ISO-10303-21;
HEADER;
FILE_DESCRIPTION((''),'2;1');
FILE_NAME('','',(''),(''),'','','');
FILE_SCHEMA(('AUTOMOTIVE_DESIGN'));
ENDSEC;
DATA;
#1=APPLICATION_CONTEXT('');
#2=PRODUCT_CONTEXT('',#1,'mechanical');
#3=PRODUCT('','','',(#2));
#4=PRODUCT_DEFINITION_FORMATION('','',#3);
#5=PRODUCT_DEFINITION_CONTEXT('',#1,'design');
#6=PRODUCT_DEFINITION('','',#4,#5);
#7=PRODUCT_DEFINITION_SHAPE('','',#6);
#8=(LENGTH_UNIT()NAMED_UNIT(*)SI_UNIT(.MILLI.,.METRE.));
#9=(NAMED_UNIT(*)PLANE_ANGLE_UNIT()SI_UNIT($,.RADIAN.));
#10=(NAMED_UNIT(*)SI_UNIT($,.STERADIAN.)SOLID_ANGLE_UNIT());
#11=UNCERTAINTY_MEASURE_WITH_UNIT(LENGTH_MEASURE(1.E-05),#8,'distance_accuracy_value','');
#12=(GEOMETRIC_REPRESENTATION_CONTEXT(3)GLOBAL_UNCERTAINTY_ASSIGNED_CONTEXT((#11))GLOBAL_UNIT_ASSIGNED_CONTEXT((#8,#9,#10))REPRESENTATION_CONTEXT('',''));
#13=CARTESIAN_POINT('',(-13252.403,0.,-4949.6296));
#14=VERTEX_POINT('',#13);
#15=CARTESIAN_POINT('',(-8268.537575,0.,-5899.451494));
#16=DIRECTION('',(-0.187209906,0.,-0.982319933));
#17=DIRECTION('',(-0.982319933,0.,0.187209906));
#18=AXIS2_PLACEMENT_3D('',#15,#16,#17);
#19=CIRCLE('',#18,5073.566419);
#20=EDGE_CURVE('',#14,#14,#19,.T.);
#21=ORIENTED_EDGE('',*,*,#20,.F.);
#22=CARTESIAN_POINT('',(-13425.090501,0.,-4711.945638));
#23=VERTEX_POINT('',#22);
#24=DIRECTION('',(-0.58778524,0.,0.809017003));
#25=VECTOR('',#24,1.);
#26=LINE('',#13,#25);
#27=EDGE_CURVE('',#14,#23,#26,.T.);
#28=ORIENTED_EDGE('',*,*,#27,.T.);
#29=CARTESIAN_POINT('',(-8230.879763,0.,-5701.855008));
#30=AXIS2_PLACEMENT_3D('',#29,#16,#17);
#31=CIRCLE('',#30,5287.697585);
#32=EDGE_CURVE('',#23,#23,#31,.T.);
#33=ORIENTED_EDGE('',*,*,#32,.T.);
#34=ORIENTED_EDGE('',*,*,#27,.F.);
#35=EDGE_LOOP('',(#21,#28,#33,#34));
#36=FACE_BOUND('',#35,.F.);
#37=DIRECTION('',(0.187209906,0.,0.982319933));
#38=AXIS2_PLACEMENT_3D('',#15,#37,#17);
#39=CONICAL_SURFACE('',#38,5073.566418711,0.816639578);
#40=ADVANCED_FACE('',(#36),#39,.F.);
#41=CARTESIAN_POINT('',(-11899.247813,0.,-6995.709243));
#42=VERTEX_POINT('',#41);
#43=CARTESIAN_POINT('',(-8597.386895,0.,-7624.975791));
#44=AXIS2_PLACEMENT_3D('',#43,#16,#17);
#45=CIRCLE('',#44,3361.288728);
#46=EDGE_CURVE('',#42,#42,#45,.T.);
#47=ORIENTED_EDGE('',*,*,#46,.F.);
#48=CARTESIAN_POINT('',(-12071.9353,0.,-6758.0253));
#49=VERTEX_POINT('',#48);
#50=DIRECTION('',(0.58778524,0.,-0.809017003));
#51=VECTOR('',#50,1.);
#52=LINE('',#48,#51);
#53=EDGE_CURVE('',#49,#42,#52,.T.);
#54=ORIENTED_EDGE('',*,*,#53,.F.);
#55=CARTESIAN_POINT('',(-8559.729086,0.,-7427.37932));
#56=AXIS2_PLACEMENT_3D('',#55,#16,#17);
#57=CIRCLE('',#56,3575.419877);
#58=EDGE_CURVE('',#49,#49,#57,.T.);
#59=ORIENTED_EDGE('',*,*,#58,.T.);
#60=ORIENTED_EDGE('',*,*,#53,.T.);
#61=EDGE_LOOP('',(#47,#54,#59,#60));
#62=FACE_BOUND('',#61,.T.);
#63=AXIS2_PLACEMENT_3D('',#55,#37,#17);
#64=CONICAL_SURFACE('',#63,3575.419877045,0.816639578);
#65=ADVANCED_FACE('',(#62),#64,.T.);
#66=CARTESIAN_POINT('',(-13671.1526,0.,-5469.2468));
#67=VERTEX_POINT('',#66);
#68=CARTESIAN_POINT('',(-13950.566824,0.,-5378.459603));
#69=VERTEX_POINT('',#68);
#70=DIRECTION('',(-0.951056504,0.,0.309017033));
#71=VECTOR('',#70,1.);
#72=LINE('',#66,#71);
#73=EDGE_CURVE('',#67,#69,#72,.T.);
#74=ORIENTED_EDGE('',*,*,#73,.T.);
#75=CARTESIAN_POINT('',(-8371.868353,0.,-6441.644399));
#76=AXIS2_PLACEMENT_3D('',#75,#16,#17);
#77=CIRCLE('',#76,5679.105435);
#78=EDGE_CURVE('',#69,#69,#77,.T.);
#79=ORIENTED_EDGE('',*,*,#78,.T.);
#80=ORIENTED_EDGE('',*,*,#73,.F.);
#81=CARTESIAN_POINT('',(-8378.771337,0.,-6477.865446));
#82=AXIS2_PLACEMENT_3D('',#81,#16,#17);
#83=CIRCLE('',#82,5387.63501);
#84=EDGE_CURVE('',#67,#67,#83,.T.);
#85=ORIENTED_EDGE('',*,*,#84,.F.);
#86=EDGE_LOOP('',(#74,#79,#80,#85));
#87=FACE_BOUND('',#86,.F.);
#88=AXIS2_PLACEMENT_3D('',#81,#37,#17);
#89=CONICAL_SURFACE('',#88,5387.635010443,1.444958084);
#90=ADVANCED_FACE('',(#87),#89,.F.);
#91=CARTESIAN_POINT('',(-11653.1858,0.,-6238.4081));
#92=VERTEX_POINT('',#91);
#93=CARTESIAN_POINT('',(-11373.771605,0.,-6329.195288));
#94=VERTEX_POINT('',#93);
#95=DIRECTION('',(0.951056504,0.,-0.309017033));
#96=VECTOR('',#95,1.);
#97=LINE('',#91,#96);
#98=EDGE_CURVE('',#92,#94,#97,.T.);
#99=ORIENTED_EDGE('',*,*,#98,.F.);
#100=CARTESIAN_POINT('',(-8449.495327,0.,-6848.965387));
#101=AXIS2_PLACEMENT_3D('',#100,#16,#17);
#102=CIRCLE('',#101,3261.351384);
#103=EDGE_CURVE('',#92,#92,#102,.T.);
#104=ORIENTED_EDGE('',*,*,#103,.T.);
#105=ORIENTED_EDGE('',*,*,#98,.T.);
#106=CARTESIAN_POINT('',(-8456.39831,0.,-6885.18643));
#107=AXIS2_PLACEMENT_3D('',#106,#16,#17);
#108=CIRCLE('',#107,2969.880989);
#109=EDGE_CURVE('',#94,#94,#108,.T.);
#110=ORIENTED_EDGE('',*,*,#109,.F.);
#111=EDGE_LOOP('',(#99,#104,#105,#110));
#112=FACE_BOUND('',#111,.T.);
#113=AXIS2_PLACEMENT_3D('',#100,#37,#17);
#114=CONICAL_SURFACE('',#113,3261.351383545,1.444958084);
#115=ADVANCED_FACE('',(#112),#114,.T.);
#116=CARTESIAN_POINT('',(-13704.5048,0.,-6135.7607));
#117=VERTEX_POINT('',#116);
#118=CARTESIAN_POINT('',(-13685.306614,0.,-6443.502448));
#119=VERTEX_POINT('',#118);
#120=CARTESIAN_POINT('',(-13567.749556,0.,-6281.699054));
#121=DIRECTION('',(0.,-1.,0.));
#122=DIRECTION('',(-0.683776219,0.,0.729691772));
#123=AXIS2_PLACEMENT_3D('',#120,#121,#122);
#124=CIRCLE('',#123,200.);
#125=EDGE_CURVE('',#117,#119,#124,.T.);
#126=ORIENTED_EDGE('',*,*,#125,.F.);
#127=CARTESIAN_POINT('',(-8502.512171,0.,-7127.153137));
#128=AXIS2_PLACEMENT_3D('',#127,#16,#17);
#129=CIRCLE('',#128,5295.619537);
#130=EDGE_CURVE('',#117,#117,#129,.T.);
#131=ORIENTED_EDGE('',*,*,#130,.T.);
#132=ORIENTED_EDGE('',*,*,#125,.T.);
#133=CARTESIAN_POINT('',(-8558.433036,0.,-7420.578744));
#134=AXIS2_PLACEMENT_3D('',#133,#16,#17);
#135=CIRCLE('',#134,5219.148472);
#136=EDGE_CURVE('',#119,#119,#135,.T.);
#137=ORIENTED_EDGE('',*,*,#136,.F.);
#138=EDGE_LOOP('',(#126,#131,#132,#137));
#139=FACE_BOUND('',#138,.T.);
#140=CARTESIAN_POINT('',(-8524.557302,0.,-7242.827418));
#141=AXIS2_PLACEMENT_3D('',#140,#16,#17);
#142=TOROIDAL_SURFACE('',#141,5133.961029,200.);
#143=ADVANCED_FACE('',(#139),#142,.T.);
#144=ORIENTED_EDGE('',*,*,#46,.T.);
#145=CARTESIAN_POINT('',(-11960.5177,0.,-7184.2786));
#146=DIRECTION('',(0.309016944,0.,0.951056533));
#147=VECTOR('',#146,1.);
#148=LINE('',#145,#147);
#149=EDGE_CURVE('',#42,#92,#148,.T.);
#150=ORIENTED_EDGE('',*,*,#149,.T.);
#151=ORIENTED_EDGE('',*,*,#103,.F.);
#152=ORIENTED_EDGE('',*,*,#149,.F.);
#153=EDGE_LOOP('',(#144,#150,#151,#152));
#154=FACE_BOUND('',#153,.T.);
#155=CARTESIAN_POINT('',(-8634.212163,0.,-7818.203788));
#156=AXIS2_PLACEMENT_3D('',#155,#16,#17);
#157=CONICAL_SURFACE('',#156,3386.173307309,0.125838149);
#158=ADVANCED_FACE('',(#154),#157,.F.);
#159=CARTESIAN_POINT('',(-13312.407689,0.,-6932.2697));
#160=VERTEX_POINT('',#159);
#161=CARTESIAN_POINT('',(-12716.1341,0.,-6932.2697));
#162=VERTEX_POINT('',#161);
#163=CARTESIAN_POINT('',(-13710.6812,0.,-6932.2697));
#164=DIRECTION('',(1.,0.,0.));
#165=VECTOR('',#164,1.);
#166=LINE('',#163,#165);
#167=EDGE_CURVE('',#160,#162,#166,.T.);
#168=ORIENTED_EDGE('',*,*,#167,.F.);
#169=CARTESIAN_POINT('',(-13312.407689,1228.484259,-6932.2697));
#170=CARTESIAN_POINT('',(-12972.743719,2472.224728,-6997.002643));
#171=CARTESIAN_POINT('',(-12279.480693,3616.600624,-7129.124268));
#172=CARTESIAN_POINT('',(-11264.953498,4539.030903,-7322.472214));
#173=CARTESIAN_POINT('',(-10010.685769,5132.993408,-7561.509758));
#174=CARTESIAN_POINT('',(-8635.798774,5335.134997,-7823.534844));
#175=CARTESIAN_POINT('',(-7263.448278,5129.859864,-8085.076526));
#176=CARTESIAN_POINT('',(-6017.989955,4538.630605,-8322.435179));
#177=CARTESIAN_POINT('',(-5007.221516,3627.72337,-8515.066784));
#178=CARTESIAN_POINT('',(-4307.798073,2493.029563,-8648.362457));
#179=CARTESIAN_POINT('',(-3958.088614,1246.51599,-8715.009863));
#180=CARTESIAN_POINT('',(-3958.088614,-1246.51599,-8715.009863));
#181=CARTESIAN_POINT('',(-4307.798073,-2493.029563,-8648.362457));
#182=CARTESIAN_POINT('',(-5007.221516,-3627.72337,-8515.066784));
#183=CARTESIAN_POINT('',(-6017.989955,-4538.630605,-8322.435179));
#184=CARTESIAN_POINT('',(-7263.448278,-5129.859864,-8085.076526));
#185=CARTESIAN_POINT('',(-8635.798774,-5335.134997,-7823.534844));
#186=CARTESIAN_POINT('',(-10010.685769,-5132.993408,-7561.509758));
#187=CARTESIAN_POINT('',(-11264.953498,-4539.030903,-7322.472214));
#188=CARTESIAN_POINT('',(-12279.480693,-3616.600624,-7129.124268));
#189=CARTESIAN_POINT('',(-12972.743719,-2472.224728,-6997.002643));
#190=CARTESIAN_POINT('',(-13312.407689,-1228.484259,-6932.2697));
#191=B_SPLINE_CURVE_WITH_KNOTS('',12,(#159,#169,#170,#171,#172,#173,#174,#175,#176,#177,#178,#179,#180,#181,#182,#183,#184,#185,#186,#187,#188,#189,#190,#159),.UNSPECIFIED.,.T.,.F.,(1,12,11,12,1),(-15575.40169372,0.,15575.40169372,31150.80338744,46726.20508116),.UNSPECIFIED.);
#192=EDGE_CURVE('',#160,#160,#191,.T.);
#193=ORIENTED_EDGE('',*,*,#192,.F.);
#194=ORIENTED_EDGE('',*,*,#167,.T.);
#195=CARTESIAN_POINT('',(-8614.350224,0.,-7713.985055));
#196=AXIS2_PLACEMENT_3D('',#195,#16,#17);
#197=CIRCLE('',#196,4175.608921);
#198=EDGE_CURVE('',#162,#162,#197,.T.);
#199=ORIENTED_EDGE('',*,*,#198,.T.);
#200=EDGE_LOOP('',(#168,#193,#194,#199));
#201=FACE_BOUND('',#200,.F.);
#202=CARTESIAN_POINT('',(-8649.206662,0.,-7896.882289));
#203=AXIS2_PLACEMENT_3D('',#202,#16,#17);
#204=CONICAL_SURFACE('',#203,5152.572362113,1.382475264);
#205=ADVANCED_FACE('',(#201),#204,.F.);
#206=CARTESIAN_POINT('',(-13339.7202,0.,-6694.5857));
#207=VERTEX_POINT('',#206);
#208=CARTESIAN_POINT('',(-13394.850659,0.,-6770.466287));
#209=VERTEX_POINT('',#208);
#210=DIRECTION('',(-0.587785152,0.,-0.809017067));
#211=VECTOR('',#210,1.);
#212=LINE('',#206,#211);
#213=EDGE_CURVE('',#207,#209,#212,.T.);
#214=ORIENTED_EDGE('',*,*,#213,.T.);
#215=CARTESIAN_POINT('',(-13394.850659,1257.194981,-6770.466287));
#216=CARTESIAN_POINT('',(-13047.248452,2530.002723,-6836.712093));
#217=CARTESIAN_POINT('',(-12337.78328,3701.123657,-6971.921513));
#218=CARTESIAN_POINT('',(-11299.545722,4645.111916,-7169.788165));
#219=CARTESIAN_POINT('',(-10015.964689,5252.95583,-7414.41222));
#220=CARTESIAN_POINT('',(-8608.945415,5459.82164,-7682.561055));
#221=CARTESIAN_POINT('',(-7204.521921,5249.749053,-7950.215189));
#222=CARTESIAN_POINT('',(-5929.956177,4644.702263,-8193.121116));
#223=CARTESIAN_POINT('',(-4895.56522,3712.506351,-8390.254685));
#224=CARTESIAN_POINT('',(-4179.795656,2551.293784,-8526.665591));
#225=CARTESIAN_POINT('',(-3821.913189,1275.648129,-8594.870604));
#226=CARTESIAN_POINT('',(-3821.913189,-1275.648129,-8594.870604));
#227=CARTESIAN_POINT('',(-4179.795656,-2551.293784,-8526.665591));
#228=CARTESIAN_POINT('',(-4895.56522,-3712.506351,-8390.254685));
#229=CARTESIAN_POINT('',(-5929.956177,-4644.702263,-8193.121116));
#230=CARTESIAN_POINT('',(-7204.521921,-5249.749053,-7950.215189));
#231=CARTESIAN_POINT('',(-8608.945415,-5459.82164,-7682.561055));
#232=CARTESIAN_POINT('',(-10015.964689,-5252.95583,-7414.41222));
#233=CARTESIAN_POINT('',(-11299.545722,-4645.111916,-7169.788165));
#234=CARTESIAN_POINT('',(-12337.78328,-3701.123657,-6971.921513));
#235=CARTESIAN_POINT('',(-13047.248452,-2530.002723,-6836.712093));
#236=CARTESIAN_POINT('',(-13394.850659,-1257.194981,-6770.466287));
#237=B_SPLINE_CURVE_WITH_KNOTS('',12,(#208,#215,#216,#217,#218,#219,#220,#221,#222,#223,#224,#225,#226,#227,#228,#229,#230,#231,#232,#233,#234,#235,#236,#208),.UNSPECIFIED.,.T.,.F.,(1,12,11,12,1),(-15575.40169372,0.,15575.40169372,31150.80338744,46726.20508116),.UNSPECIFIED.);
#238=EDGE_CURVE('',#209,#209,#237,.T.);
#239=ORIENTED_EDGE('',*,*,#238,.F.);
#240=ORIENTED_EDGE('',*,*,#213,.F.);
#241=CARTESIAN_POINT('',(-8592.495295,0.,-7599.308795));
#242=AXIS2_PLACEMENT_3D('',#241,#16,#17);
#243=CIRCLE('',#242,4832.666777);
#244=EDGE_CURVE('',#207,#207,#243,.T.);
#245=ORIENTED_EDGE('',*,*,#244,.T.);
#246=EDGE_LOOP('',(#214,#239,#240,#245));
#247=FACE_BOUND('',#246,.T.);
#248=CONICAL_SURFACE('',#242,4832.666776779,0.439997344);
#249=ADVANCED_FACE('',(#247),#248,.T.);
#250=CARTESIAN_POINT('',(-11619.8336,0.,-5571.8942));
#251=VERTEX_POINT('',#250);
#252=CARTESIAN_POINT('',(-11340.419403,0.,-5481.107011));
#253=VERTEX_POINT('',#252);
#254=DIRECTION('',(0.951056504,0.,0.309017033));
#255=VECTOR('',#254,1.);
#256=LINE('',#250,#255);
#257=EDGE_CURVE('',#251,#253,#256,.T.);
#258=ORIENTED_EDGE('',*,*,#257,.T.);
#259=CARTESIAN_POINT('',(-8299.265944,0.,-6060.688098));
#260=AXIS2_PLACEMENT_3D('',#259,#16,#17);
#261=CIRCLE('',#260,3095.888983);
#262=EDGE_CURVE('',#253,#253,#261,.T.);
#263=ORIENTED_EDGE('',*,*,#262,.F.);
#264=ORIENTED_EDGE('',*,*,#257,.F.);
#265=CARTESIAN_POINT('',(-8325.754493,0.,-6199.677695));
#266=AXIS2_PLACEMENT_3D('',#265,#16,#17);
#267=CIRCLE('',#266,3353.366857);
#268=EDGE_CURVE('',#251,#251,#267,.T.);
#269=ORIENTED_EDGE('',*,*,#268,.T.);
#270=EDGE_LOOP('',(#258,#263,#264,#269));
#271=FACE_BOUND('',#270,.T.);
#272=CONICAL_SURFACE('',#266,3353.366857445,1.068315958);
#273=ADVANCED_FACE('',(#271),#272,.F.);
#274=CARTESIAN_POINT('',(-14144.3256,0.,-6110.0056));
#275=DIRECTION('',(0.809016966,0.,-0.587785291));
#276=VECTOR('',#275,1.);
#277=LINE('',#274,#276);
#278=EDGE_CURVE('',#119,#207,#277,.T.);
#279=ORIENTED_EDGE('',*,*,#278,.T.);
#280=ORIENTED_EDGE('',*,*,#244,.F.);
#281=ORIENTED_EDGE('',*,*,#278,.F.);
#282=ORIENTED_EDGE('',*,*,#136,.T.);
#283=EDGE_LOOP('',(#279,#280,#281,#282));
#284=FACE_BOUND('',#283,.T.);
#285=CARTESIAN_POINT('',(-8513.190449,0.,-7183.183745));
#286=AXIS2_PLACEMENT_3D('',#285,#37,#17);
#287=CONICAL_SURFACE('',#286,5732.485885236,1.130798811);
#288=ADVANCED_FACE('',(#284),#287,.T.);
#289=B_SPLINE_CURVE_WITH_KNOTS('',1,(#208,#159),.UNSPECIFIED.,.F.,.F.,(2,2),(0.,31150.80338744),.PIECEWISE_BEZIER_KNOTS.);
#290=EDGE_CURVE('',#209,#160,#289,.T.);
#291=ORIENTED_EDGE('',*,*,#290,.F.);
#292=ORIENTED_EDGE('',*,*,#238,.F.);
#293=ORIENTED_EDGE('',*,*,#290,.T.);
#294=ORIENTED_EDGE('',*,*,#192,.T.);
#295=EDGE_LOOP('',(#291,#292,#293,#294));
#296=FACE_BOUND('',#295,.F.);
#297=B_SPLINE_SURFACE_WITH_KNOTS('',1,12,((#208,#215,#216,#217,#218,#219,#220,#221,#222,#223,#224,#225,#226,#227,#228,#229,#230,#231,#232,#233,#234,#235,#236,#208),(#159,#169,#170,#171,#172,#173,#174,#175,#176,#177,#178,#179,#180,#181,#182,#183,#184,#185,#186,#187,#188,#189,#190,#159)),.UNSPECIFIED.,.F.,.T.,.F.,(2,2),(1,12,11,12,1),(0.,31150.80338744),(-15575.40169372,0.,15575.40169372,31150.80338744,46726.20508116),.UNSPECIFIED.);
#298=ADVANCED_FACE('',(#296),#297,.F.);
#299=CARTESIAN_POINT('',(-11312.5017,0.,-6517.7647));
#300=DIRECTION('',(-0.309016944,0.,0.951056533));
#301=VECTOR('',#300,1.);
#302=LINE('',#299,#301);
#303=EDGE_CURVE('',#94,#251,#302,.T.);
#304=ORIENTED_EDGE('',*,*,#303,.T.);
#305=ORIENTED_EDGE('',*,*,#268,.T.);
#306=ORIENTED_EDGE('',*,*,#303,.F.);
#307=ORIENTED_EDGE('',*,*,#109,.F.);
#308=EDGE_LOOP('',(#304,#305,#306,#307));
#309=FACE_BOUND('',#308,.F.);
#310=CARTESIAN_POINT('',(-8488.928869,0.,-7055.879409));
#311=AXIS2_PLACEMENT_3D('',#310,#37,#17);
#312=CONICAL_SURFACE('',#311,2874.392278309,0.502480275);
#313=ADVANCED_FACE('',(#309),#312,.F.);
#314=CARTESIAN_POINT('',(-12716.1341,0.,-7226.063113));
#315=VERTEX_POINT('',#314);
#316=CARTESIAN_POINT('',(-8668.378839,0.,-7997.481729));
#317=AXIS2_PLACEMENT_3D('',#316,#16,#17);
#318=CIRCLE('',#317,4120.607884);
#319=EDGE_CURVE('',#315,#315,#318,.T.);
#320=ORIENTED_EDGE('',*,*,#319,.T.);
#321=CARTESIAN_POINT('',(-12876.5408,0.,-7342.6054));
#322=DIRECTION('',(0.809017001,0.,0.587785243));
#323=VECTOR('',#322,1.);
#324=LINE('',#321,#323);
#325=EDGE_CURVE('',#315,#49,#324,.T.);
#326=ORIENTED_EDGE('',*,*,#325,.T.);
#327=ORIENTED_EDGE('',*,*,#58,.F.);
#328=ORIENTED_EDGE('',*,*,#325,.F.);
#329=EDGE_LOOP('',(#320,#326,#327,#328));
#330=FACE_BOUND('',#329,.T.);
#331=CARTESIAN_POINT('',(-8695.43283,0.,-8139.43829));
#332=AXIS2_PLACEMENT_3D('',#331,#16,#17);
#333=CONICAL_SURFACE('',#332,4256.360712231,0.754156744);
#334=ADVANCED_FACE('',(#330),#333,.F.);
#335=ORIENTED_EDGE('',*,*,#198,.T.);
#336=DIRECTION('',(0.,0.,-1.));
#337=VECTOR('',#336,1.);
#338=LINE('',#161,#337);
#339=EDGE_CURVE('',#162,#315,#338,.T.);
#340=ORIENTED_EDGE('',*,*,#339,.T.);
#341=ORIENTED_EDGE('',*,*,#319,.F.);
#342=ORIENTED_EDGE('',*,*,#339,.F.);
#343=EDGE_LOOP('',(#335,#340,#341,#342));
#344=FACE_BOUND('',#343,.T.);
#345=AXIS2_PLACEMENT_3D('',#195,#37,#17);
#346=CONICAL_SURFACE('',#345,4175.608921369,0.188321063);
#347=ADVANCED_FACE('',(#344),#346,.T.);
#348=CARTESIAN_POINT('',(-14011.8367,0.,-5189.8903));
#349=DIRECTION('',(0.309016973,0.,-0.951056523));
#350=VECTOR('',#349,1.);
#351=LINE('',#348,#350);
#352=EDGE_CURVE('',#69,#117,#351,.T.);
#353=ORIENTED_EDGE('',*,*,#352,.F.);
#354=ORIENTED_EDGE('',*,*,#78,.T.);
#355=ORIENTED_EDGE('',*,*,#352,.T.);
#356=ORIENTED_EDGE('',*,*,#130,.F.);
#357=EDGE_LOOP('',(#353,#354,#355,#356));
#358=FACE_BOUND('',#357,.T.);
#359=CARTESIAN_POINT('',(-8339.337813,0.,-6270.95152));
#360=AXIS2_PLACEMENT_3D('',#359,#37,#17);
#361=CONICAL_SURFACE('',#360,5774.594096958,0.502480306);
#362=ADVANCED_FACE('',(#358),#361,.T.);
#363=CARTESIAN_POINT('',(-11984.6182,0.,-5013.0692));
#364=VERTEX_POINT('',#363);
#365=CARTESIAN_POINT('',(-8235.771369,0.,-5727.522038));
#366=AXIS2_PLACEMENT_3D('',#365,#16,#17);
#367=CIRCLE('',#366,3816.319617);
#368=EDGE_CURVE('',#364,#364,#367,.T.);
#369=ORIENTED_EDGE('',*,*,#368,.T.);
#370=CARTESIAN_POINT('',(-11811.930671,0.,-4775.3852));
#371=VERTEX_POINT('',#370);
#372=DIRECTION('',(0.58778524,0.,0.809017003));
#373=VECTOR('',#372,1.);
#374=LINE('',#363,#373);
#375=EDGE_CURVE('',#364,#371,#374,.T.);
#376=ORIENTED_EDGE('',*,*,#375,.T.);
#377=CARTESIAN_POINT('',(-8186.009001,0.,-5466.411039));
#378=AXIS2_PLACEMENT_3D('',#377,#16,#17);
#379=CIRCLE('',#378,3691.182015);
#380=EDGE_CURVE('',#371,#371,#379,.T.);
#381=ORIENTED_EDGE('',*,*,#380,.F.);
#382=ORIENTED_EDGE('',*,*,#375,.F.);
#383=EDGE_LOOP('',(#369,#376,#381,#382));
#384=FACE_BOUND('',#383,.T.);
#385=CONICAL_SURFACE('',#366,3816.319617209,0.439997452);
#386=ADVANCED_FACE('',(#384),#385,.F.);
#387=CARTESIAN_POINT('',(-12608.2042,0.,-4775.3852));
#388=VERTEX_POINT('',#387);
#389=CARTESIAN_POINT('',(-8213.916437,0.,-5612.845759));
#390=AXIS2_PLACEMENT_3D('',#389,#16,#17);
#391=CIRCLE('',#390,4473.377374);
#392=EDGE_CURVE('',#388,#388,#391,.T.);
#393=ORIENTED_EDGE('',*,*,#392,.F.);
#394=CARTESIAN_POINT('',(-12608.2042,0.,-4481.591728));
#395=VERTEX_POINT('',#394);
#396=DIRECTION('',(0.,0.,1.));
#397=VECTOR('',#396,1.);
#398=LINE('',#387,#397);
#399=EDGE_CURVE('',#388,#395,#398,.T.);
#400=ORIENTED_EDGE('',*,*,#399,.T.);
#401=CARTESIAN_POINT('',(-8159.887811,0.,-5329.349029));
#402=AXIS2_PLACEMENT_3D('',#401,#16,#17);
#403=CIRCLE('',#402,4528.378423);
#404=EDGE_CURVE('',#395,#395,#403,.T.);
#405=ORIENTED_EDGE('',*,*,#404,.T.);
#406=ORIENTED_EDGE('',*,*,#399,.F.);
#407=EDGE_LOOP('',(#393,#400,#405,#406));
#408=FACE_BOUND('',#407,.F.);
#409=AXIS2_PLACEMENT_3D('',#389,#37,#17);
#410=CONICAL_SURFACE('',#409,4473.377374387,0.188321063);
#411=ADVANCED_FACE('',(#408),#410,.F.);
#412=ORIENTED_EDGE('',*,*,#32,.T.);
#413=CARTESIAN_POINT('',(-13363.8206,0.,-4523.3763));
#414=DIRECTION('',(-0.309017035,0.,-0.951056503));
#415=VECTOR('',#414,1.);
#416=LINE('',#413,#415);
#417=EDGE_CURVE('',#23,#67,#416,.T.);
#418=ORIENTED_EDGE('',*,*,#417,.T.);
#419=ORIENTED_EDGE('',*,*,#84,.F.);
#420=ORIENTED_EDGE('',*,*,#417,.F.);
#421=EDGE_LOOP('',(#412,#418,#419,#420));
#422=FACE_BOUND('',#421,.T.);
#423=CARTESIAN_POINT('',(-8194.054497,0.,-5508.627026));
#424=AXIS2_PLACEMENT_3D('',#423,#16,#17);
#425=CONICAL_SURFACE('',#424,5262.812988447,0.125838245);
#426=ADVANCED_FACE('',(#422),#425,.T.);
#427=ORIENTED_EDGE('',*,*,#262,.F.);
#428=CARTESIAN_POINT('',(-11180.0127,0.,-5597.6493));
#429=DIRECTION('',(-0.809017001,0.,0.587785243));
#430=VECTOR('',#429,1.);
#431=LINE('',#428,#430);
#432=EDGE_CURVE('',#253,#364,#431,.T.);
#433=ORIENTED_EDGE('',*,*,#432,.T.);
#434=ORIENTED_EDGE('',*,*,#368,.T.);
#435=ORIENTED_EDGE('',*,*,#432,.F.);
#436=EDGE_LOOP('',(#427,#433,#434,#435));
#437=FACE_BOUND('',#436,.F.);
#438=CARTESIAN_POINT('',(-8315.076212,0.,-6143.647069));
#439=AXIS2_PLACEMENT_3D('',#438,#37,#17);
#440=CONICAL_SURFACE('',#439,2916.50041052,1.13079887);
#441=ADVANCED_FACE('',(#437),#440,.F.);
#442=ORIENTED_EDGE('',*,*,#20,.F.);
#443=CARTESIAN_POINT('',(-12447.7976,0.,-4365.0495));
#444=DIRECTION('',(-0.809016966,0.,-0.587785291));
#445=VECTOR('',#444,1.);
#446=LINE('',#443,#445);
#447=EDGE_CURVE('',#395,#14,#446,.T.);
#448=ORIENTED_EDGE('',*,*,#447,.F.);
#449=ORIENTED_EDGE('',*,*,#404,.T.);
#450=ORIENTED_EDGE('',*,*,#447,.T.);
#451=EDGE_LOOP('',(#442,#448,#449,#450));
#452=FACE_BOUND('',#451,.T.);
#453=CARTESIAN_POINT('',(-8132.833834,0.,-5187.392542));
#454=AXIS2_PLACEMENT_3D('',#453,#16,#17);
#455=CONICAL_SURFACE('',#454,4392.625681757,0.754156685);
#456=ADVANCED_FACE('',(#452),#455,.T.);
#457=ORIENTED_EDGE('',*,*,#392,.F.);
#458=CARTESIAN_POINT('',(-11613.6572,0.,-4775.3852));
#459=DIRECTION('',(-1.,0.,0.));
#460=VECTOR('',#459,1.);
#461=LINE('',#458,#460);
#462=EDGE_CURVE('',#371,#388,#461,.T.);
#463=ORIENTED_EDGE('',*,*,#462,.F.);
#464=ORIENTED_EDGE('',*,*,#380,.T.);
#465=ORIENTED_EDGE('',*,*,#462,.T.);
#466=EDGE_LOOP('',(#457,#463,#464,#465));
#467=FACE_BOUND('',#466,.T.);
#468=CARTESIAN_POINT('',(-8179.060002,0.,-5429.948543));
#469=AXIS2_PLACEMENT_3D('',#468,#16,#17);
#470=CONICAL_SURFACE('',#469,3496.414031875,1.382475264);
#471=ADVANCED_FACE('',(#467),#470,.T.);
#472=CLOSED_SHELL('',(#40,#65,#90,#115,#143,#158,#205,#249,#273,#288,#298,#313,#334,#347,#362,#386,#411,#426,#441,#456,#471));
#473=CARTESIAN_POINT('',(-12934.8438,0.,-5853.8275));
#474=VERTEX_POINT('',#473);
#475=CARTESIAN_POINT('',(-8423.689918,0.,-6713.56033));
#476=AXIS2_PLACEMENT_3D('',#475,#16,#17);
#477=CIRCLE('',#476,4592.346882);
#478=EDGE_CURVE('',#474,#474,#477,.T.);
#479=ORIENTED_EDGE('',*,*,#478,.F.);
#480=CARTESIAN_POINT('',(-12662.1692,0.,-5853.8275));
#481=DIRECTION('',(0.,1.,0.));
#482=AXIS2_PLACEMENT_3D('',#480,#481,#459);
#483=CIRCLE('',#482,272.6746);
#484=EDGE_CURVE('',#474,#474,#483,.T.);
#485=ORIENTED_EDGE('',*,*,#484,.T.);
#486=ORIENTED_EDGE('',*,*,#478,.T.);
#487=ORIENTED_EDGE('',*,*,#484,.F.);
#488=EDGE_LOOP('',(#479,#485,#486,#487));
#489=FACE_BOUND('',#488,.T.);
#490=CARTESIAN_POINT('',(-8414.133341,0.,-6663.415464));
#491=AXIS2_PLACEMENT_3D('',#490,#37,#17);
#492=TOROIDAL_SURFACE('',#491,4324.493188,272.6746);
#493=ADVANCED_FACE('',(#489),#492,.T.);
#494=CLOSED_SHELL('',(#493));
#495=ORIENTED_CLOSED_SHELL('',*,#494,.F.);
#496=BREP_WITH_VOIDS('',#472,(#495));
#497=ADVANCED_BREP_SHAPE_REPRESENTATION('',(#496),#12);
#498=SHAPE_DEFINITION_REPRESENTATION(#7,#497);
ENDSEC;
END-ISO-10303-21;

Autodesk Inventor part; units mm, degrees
ref_plane "YZ Plane" through (0, 0, 0) normal (1, 0, 0) x (0, 1, 0)
ref_plane "XZ Plane" through (0, 0, 0) normal (0, 1, 0) x (-1, 0, 0)
ref_plane "XY Plane" through (0, 0, 0) normal (0, 0, 1) x (1, 0, 0)
sketch "Sketch1" plane through (0, 0, 0) normal (0, 1, 0) x (-1, 0, 0)
  line L0 (0, 1270.9169) -> (0, 1070.9169)
  line L1 (0, 1070.9169) -> (280.5773, 1070.9169)
  circle A0 centre (280.5773, 1070.9169) radius 150
  arc A1 (0, 862.6395) -> (280.5773, 1070.9169) centre (285.6481, 770.9597) ccw
  line L2 (0, 1671.4874) -> (1000, 1671.4874)
  line L3 (1000, 1671.4874) -> (1000, 2371.4874)
  line L4 (1000, 2371.4874) -> (0, 2371.4874)
  line L5 (0, 2371.4874) -> (0, 1671.4874)
  line L6 (663.7557, 3727.8622) -> (677.7261, 3727.8622) construction
  line L7 (677.7261, 3727.8622) -> (677.7261, 3724.6141) construction
  line L8 (677.7261, 3724.6141) -> (663.7557, 3724.6141) construction
  line L9 (663.7557, 3724.6141) -> (663.7557, 3727.8622) construction
  line L10 (500, 2021.4874) -> (1196.7714, 1270.9169)
  line L11 (1196.7714, 1270.9169) -> (1168.0077, -285.8687)
  line L12 (1168.0077, -285.8687) -> (464.4615, -168.1988)
  line L13 (464.4615, -168.1988) -> (320.7847, -408.7683)
  line L14 (1361.4266, 1423.77) -> (-428.0148, 1423.77)
  line L15 (-500, 1671.4874) -> (-500, 2371.4874)
  line L16 (-500, 2371.4874) -> (-1500, 2371.4874)
  line L17 (-1500, 2371.4874) -> (-1500, 1671.4874)
  line L18 (-1500, 1671.4874) -> (-500, 1671.4874)
  line L19 (2500, 1671.4874) -> (2500, 2371.4874)
  line L20 (2500, 2371.4874) -> (1500, 2371.4874)
  line L21 (1500, 2371.4874) -> (1500, 1671.4874)
  line L22 (1500, 1671.4874) -> (2500, 1671.4874)
  line L23 (1000, 1671.4874) -> (1000, 2371.4874)
  line L24 (1000, 2371.4874) -> (0, 2371.4874)
  line L25 (0, 2371.4874) -> (0, 1671.4874)
  line L26 (0, 1671.4874) -> (1000, 1671.4874)
  line L27 (500, 2021.4874) -> (500, -515.8022)
  line L28 (1000, 871.4874) -> (0, 871.4874)
  line L29 (1000, 871.4874) -> (0, 871.4874)
  line L30 (1000, 171.4874) -> (1000, 871.4874)
  line L31 (1000, 171.4874) -> (1000, 871.4874)
  line L32 (0, 871.4874) -> (0, 171.4874)
  line L33 (0, 871.4874) -> (0, 171.4874)
  line L34 (0, 171.4874) -> (1000, 171.4874)
  line L35 (0, 171.4874) -> (1000, 171.4874)
  line L36 (1000, -628.5126) -> (0, -628.5126)
  line L37 (1000, -628.5126) -> (0, -628.5126)
  line L38 (1000, -1328.5126) -> (1000, -628.5126)
  line L39 (1000, -1328.5126) -> (1000, -628.5126)
  line L40 (0, -628.5126) -> (0, -1328.5126)
  line L41 (0, -628.5126) -> (0, -1328.5126)
  line L42 (0, -1328.5126) -> (1000, -1328.5126)
  line L43 (0, -1328.5126) -> (1000, -1328.5126)
  line L44 (1000, -2128.5126) -> (0, -2128.5126)
  line L45 (1000, -2128.5126) -> (0, -2128.5126)
  line L46 (1000, -2828.5126) -> (1000, -2128.5126)
  line L47 (1000, -2828.5126) -> (1000, -2128.5126)
  line L48 (0, -2128.5126) -> (0, -2828.5126)
  line L49 (0, -2128.5126) -> (0, -2828.5126)
  line L50 (0, -2828.5126) -> (1000, -2828.5126)
  line L51 (0, -2828.5126) -> (1000, -2828.5126)
  line L52 (1000, -3628.5126) -> (0, -3628.5126)
  line L53 (1000, -3628.5126) -> (0, -3628.5126)
  line L54 (1000, -4328.5126) -> (1000, -3628.5126)
  line L55 (1000, -4328.5126) -> (1000, -3628.5126)
  line L56 (0, -3628.5126) -> (0, -4328.5126)
  line L57 (0, -3628.5126) -> (0, -4328.5126)
  line L58 (0, -4328.5126) -> (1000, -4328.5126)
  line L59 (0, -4328.5126) -> (1000, -4328.5126)
  line L60 (1000, -5128.5126) -> (0, -5128.5126)
  line L61 (1000, -5128.5126) -> (0, -5128.5126)
  line L62 (1000, -5828.5126) -> (1000, -5128.5126)
  line L63 (1000, -5828.5126) -> (1000, -5128.5126)
  line L64 (0, -5128.5126) -> (0, -5828.5126)
  line L65 (0, -5128.5126) -> (0, -5828.5126)
  line L66 (0, -5828.5126) -> (1000, -5828.5126)
  line L67 (0, -5828.5126) -> (1000, -5828.5126)
  line L68 (1000, -6628.5126) -> (0, -6628.5126)
  line L69 (1000, -6628.5126) -> (0, -6628.5126)
  line L70 (1000, -7328.5126) -> (1000, -6628.5126)
  line L71 (1000, -7328.5126) -> (1000, -6628.5126)
  line L72 (0, -6628.5126) -> (0, -7328.5126)
  line L73 (0, -6628.5126) -> (0, -7328.5126)
  line L74 (0, -7328.5126) -> (1000, -7328.5126)
  line L75 (0, -7328.5126) -> (1000, -7328.5126)
  line L76 (1000, -8128.5126) -> (0, -8128.5126)
  line L77 (1000, -8128.5126) -> (0, -8128.5126)
  line L78 (1000, -8828.5126) -> (1000, -8128.5126)
  line L79 (1000, -8828.5126) -> (1000, -8128.5126)
  line L80 (0, -8128.5126) -> (0, -8828.5126)
  line L81 (0, -8128.5126) -> (0, -8828.5126)
  line L82 (0, -8828.5126) -> (1000, -8828.5126)
  line L83 (0, -8828.5126) -> (1000, -8828.5126)
  line L84 (1000, -9628.5126) -> (0, -9628.5126)
  line L85 (1000, -9628.5126) -> (0, -9628.5126)
  line L86 (1000, -10328.5126) -> (1000, -9628.5126)
  line L87 (1000, -10328.5126) -> (1000, -9628.5126)
  line L88 (0, -9628.5126) -> (0, -10328.5126)
  line L89 (0, -9628.5126) -> (0, -10328.5126)
  line L90 (0, -10328.5126) -> (1000, -10328.5126)
  line L91 (0, -10328.5126) -> (1000, -10328.5126)
  line L92 (1000, -11128.5126) -> (0, -11128.5126)
  line L93 (1000, -11128.5126) -> (0, -11128.5126)
  line L94 (1000, -11828.5126) -> (1000, -11128.5126)
  line L95 (1000, -11828.5126) -> (1000, -11128.5126)
  line L96 (0, -11128.5126) -> (0, -11828.5126)
  line L97 (0, -11128.5126) -> (0, -11828.5126)
  line L98 (0, -11828.5126) -> (1000, -11828.5126)
  line L99 (0, -11828.5126) -> (1000, -11828.5126)
  line L100 (1000, -12628.5126) -> (0, -12628.5126)
  line L101 (1000, -12628.5126) -> (0, -12628.5126)
  line L102 (1000, -13328.5126) -> (1000, -12628.5126)
  line L103 (1000, -13328.5126) -> (1000, -12628.5126)
  line L104 (0, -12628.5126) -> (0, -13328.5126)
  line L105 (0, -12628.5126) -> (0, -13328.5126)
  line L106 (0, -13328.5126) -> (1000, -13328.5126)
  line L107 (0, -13328.5126) -> (1000, -13328.5126)
  line L108 (1000, -14128.5126) -> (0, -14128.5126)
  line L109 (1000, -14128.5126) -> (0, -14128.5126)
  line L110 (1000, -14828.5126) -> (1000, -14128.5126)
  line L111 (1000, -14828.5126) -> (1000, -14128.5126)
  line L112 (0, -14128.5126) -> (0, -14828.5126)
  line L113 (0, -14128.5126) -> (0, -14828.5126)
  line L114 (0, -14828.5126) -> (1000, -14828.5126)
  line L115 (0, -14828.5126) -> (1000, -14828.5126)
  line L116 (1000, -15628.5126) -> (0, -15628.5126)
  line L117 (1000, -15628.5126) -> (0, -15628.5126)
  line L118 (1000, -16328.5126) -> (1000, -15628.5126)
  line L119 (1000, -16328.5126) -> (1000, -15628.5126)
  line L120 (0, -15628.5126) -> (0, -16328.5126)
  line L121 (0, -15628.5126) -> (0, -16328.5126)
  line L122 (0, -16328.5126) -> (1000, -16328.5126)
  line L123 (0, -16328.5126) -> (1000, -16328.5126)
  line L124 (1000, -17128.5126) -> (0, -17128.5126)
  line L125 (1000, -17128.5126) -> (0, -17128.5126)
  line L126 (1000, -17828.5126) -> (1000, -17128.5126)
  line L127 (1000, -17828.5126) -> (1000, -17128.5126)
  line L128 (0, -17128.5126) -> (0, -17828.5126)
  line L129 (0, -17128.5126) -> (0, -17828.5126)
  line L130 (0, -17828.5126) -> (1000, -17828.5126)
  line L131 (0, -17828.5126) -> (1000, -17828.5126)
  line L132 (1000, -18628.5126) -> (0, -18628.5126)
  line L133 (1000, -18628.5126) -> (0, -18628.5126)
  line L134 (1000, -19328.5126) -> (1000, -18628.5126)
  line L135 (1000, -19328.5126) -> (1000, -18628.5126)
  line L136 (0, -18628.5126) -> (0, -19328.5126)
  line L137 (0, -18628.5126) -> (0, -19328.5126)
  line L138 (0, -19328.5126) -> (1000, -19328.5126)
  line L139 (0, -19328.5126) -> (1000, -19328.5126)
  line L140 (1000, -20128.5126) -> (0, -20128.5126)
  line L141 (1000, -20128.5126) -> (0, -20128.5126)
  line L142 (1000, -20828.5126) -> (1000, -20128.5126)
  line L143 (1000, -20828.5126) -> (1000, -20128.5126)
  line L144 (0, -20128.5126) -> (0, -20828.5126)
  line L145 (0, -20128.5126) -> (0, -20828.5126)
  line L146 (0, -20828.5126) -> (1000, -20828.5126)
  line L147 (0, -20828.5126) -> (1000, -20828.5126)
  line L148 (1000, -21628.5126) -> (0, -21628.5126)
  line L149 (1000, -21628.5126) -> (0, -21628.5126)
  line L150 (1000, -22328.5126) -> (1000, -21628.5126)
  line L151 (1000, -22328.5126) -> (1000, -21628.5126)
  line L152 (0, -21628.5126) -> (0, -22328.5126)
  line L153 (0, -21628.5126) -> (0, -22328.5126)
  line L154 (0, -22328.5126) -> (1000, -22328.5126)
  line L155 (0, -22328.5126) -> (1000, -22328.5126)
  line L156 (1000, -23128.5126) -> (0, -23128.5126)
  line L157 (1000, -23128.5126) -> (0, -23128.5126)
  line L158 (1000, -23828.5126) -> (1000, -23128.5126)
  line L159 (1000, -23828.5126) -> (1000, -23128.5126)
  line L160 (0, -23128.5126) -> (0, -23828.5126)
  line L161 (0, -23128.5126) -> (0, -23828.5126)
  line L162 (0, -23828.5126) -> (1000, -23828.5126)
  line L163 (0, -23828.5126) -> (1000, -23828.5126)
  line L164 (1000, -24628.5126) -> (0, -24628.5126)
  line L165 (1000, -24628.5126) -> (0, -24628.5126)
  line L166 (1000, -25328.5126) -> (1000, -24628.5126)
  line L167 (1000, -25328.5126) -> (1000, -24628.5126)
  line L168 (0, -24628.5126) -> (0, -25328.5126)
  line L169 (0, -24628.5126) -> (0, -25328.5126)
  line L170 (0, -25328.5126) -> (1000, -25328.5126)
  line L171 (0, -25328.5126) -> (1000, -25328.5126)
  line L172 (1000, -26128.5126) -> (0, -26128.5126)
  line L173 (1000, -26128.5126) -> (0, -26128.5126)
  line L174 (1000, -26828.5126) -> (1000, -26128.5126)
  line L175 (1000, -26828.5126) -> (1000, -26128.5126)
  line L176 (0, -26128.5126) -> (0, -26828.5126)
  line L177 (0, -26128.5126) -> (0, -26828.5126)
  line L178 (0, -26828.5126) -> (1000, -26828.5126)
  line L179 (0, -26828.5126) -> (1000, -26828.5126)
  line L180 (1000, -27628.5126) -> (0, -27628.5126)
  line L181 (1000, -27628.5126) -> (0, -27628.5126)
  line L182 (1000, -28328.5126) -> (1000, -27628.5126)
  line L183 (1000, -28328.5126) -> (1000, -27628.5126)
  line L184 (0, -27628.5126) -> (0, -28328.5126)
  line L185 (0, -27628.5126) -> (0, -28328.5126)
  line L186 (0, -28328.5126) -> (1000, -28328.5126)
  line L187 (0, -28328.5126) -> (1000, -28328.5126)
  line L188 (1000, -29128.5126) -> (0, -29128.5126)
  line L189 (1000, -29128.5126) -> (0, -29128.5126)
  line L190 (1000, -29828.5126) -> (1000, -29128.5126)
  line L191 (1000, -29828.5126) -> (1000, -29128.5126)
  line L192 (0, -29128.5126) -> (0, -29828.5126)
  line L193 (0, -29128.5126) -> (0, -29828.5126)
  line L194 (0, -29828.5126) -> (1000, -29828.5126)
  line L195 (0, -29828.5126) -> (1000, -29828.5126)
  line L196 (1000, -30628.5126) -> (0, -30628.5126)
  line L197 (1000, -30628.5126) -> (0, -30628.5126)
  line L198 (1000, -31328.5126) -> (1000, -30628.5126)
  line L199 (1000, -31328.5126) -> (1000, -30628.5126)
  line L200 (0, -30628.5126) -> (0, -31328.5126)
  line L201 (0, -30628.5126) -> (0, -31328.5126)
  line L202 (0, -31328.5126) -> (1000, -31328.5126)
  line L203 (0, -31328.5126) -> (1000, -31328.5126)
  line L204 (1000, -32128.5126) -> (0, -32128.5126)
  line L205 (1000, -32128.5126) -> (0, -32128.5126)
  line L206 (1000, -32828.5126) -> (1000, -32128.5126)
  line L207 (1000, -32828.5126) -> (1000, -32128.5126)
  line L208 (0, -32128.5126) -> (0, -32828.5126)
  line L209 (0, -32128.5126) -> (0, -32828.5126)
  line L210 (0, -32828.5126) -> (1000, -32828.5126)
  line L211 (0, -32828.5126) -> (1000, -32828.5126)
  line L212 (1000, -33628.5126) -> (0, -33628.5126)
  line L213 (1000, -33628.5126) -> (0, -33628.5126)
  line L214 (1000, -34328.5126) -> (1000, -33628.5126)
  line L215 (1000, -34328.5126) -> (1000, -33628.5126)
  line L216 (0, -33628.5126) -> (0, -34328.5126)
  line L217 (0, -33628.5126) -> (0, -34328.5126)
  line L218 (0, -34328.5126) -> (1000, -34328.5126)
  line L219 (0, -34328.5126) -> (1000, -34328.5126)
  line L220 (1000, -35128.5126) -> (0, -35128.5126)
  line L221 (1000, -35128.5126) -> (0, -35128.5126)
  line L222 (1000, -35828.5126) -> (1000, -35128.5126)
  line L223 (1000, -35828.5126) -> (1000, -35128.5126)
  line L224 (0, -35128.5126) -> (0, -35828.5126)
  line L225 (0, -35128.5126) -> (0, -35828.5126)
  line L226 (0, -35828.5126) -> (1000, -35828.5126)
  line L227 (0, -35828.5126) -> (1000, -35828.5126)
  line L228 (1000, -36628.5126) -> (0, -36628.5126)
  line L229 (1000, -36628.5126) -> (0, -36628.5126)
  line L230 (1000, -37328.5126) -> (1000, -36628.5126)
  line L231 (1000, -37328.5126) -> (1000, -36628.5126)
  line L232 (0, -36628.5126) -> (0, -37328.5126)
  line L233 (0, -36628.5126) -> (0, -37328.5126)
  line L234 (0, -37328.5126) -> (1000, -37328.5126)
  line L235 (0, -37328.5126) -> (1000, -37328.5126)
  line L236 (1000, -38128.5126) -> (0, -38128.5126)
  line L237 (1000, -38128.5126) -> (0, -38128.5126)
  line L238 (1000, -38828.5126) -> (1000, -38128.5126)
  line L239 (1000, -38828.5126) -> (1000, -38128.5126)
  line L240 (0, -38128.5126) -> (0, -38828.5126)
  line L241 (0, -38128.5126) -> (0, -38828.5126)
  line L242 (0, -38828.5126) -> (1000, -38828.5126)
  line L243 (0, -38828.5126) -> (1000, -38828.5126)
  line L244 (1000, -39628.5126) -> (0, -39628.5126)
  line L245 (1000, -39628.5126) -> (0, -39628.5126)
  line L246 (1000, -40328.5126) -> (1000, -39628.5126)
  line L247 (1000, -40328.5126) -> (1000, -39628.5126)
  line L248 (0, -39628.5126) -> (0, -40328.5126)
  line L249 (0, -39628.5126) -> (0, -40328.5126)
  line L250 (0, -40328.5126) -> (1000, -40328.5126)
  line L251 (0, -40328.5126) -> (1000, -40328.5126)
  line L252 (1000, -41128.5126) -> (0, -41128.5126)
  line L253 (1000, -41128.5126) -> (0, -41128.5126)
  line L254 (1000, -41828.5126) -> (1000, -41128.5126)
  line L255 (1000, -41828.5126) -> (1000, -41128.5126)
  line L256 (0, -41128.5126) -> (0, -41828.5126)
  line L257 (0, -41128.5126) -> (0, -41828.5126)
  line L258 (0, -41828.5126) -> (1000, -41828.5126)
  line L259 (0, -41828.5126) -> (1000, -41828.5126)
  circle A2 centre (1648.4251, 5737.6204) radius 272.6746
  line L260 (1594.4602, 7563.1402) -> (599.9131, 7563.1402)
  line L261 (599.9131, 7563.1402) -> (599.9131, 6816.0626)
  line L262 (599.9131, 6816.0626) -> (1594.4602, 6816.0626)
  line L263 (1594.4602, 6816.0626) -> (1594.4602, 7563.1402)
  line L264 (166.2687, 5993.7986) -> (970.8742, 6578.3787)
  line L265 (-272.8525, 6598.197) -> (166.2687, 5993.7986)
  line L266 (531.753, 7182.7771) -> (-272.8525, 6598.197)
  line L267 (970.8742, 6578.3787) -> (531.753, 7182.7771)
  line L268 (298.7576, 5073.6832) -> (606.0896, 6019.5536)
  line L269 (-411.7554, 5304.5428) -> (298.7576, 5073.6832)
  line L270 (-104.4234, 6250.4133) -> (-411.7554, 5304.5428)
  line L271 (606.0896, 6019.5536) -> (-104.4234, 6250.4133)
  line L272 (946.7737, 4407.1692) -> (639.4417, 5353.0397)
  line L273 (236.2607, 4176.3096) -> (946.7737, 4407.1692)
  line L274 (-71.0712, 5122.18) -> (236.2607, 4176.3096)
  line L275 (639.4417, 5353.0397) -> (-71.0712, 5122.18)
  line L276 (1862.7967, 4248.8424) -> (1058.1913, 4833.4225)
  line L277 (1423.6756, 3644.444) -> (1862.7967, 4248.8424)
  line L278 (619.0701, 4229.0241) -> (1423.6756, 3644.444)
  line L279 (1058.1913, 4833.4225) -> (619.0701, 4229.0241)
  line L280 (2696.9371, 4659.1782) -> (1702.3901, 4659.1782)
  line L281 (2696.9371, 3912.1006) -> (2696.9371, 4659.1782)
  line L282 (1702.3901, 3912.1006) -> (2696.9371, 3912.1006)
  line L283 (1702.3901, 4659.1782) -> (1702.3901, 3912.1006)
  line L284 (3130.5816, 5481.4422) -> (2325.9761, 4896.8621)
  line L285 (3569.7028, 4877.0438) -> (3130.5816, 5481.4422)
  line L286 (2765.0973, 4292.4637) -> (3569.7028, 4877.0438)
  line L287 (2325.9761, 4896.8621) -> (2765.0973, 4292.4637)
  line L288 (2998.0927, 6401.5576) -> (2690.7607, 5455.6871)
  line L289 (3708.6056, 6170.6979) -> (2998.0927, 6401.5576)
  line L290 (3401.2737, 5224.8275) -> (3708.6056, 6170.6979)
  line L291 (2690.7607, 5455.6871) -> (3401.2737, 5224.8275)
  line L292 (2350.0766, 7068.0715) -> (2657.4085, 6122.2011)
  line L293 (3060.5896, 7298.9312) -> (2350.0766, 7068.0715)
  line L294 (3367.9215, 6353.0607) -> (3060.5896, 7298.9312)
  line L295 (2657.4085, 6122.2011) -> (3367.9215, 6353.0607)
  line L296 (1434.0535, 7226.3984) -> (2238.659, 6641.8183)
  line L297 (1873.1747, 7830.7968) -> (1434.0535, 7226.3984)
  line L298 (2677.7802, 7246.2167) -> (1873.1747, 7830.7968)
  line L299 (2238.659, 6641.8183) -> (2677.7802, 7246.2167)
  line L300 (7155.2972, -58.1035) -> (-4493.949, -58.1035)
  line L301 (7155.2972, -58.1035) -> (8996.4598, -9718.9767)
  circle A3 centre (17696.4177, 10411.0259) radius 272.6746
  line L302 (17750.3826, 12236.5457) -> (18744.9297, 12236.5457)
  line L303 (18744.9297, 12236.5457) -> (18744.9297, 11489.4681)
  line L304 (18744.9297, 11489.4681) -> (17750.3826, 11489.4681)
  line L305 (17750.3826, 11489.4681) -> (17750.3826, 12236.5457)
  line L306 (19178.5741, 10667.2041) -> (18373.9687, 11251.7842)
  line L307 (19617.6953, 11271.6025) -> (19178.5741, 10667.2041)
  line L308 (18813.0898, 11856.1826) -> (19617.6953, 11271.6025)
  line L309 (18373.9687, 11251.7842) -> (18813.0898, 11856.1826)
  line L310 (19046.0852, 9747.0887) -> (18738.7532, 10692.9592)
  line L311 (19756.5982, 9977.9484) -> (19046.0852, 9747.0887)
  line L312 (19449.2662, 10923.8188) -> (19756.5982, 9977.9484)
  line L313 (18738.7532, 10692.9592) -> (19449.2662, 10923.8188)
  line L314 (18398.0691, 9080.5748) -> (18705.4011, 10026.4452)
  line L315 (19108.5821, 8849.7151) -> (18398.0691, 9080.5748)
  line L316 (19415.914, 9795.5856) -> (19108.5821, 8849.7151)
  line L317 (18705.4011, 10026.4452) -> (19415.914, 9795.5856)
  line L318 (17482.0461, 8922.248) -> (18286.6515, 9506.828)
  line L319 (17921.1672, 8317.8495) -> (17482.0461, 8922.248)
  line L320 (18725.7727, 8902.4296) -> (17921.1672, 8317.8495)
  line L321 (18286.6515, 9506.828) -> (18725.7727, 8902.4296)
  line L322 (16647.9057, 9332.5837) -> (17642.4527, 9332.5837)
  line L323 (16647.9057, 8585.5061) -> (16647.9057, 9332.5837)
  line L324 (17642.4527, 8585.5061) -> (16647.9057, 8585.5061)
  line L325 (17642.4527, 9332.5837) -> (17642.4527, 8585.5061)
  line L326 (16214.2612, 10154.8477) -> (17018.8667, 9570.2676)
  line L327 (15775.14, 9550.4493) -> (16214.2612, 10154.8477)
  line L328 (16579.7455, 8965.8692) -> (15775.14, 9550.4493)
  line L329 (17018.8667, 9570.2676) -> (16579.7455, 8965.8692)
  line L330 (16346.7501, 11074.9631) -> (16654.0821, 10129.0927)
  line L331 (15636.2372, 10844.1035) -> (16346.7501, 11074.9631)
  line L332 (15943.5691, 9898.233) -> (15636.2372, 10844.1035)
  line L333 (16654.0821, 10129.0927) -> (15943.5691, 9898.233)
  line L334 (16994.7662, 11741.4771) -> (16687.4343, 10795.6066)
  line L335 (16284.2532, 11972.3367) -> (16994.7662, 11741.4771)
  line L336 (15976.9213, 11026.4663) -> (16284.2532, 11972.3367)
  line L337 (16687.4343, 10795.6066) -> (15976.9213, 11026.4663)
  line L338 (17910.7893, 11899.8039) -> (17106.1838, 11315.2238)
  line L339 (17471.6681, 12504.2023) -> (17910.7893, 11899.8039)
  line L340 (16667.0626, 11919.6222) -> (17471.6681, 12504.2023)
  line L341 (17106.1838, 11315.2238) -> (16667.0626, 11919.6222)
  circle A4 centre (1648.4251, -5853.8275) radius 272.6746
  line L342 (1594.4602, -7679.3472) -> (599.9131, -7679.3472)
  line L343 (599.9131, -7679.3472) -> (599.9131, -6932.2697)
  line L344 (599.9131, -6932.2697) -> (1594.4602, -6932.2697)
  line L345 (1594.4602, -6932.2697) -> (1594.4602, -7679.3472)
  line L346 (166.2687, -6110.0056) -> (970.8742, -6694.5857)
  line L347 (-272.8525, -6714.4041) -> (166.2687, -6110.0056)
  line L348 (531.753, -7298.9842) -> (-272.8525, -6714.4041)
  line L349 (970.8742, -6694.5857) -> (531.753, -7298.9842)
  line L350 (298.7576, -5189.8903) -> (606.0896, -6135.7607)
  line L351 (-411.7554, -5420.7499) -> (298.7576, -5189.8903)
  line L352 (-104.4234, -6366.6204) -> (-411.7554, -5420.7499)
  line L353 (606.0896, -6135.7607) -> (-104.4234, -6366.6204)
  line L354 (946.7737, -4523.3763) -> (639.4417, -5469.2468)
  line L355 (236.2607, -4292.5167) -> (946.7737, -4523.3763)
  line L356 (-71.0712, -5238.3871) -> (236.2607, -4292.5167)
  line L357 (639.4417, -5469.2468) -> (-71.0712, -5238.3871)
  line L358 (1862.7967, -4365.0495) -> (1058.1913, -4949.6296)
  line L359 (1423.6756, -3760.651) -> (1862.7967, -4365.0495)
  line L360 (619.0701, -4345.2311) -> (1423.6756, -3760.651)
  line L361 (1058.1913, -4949.6296) -> (619.0701, -4345.2311)
  line L362 (2696.9371, -4775.3852) -> (1702.3901, -4775.3852)
  line L363 (2696.9371, -4028.3077) -> (2696.9371, -4775.3852)
  line L364 (1702.3901, -4028.3077) -> (2696.9371, -4028.3077)
  line L365 (1702.3901, -4775.3852) -> (1702.3901, -4028.3077)
  line L366 (3130.5816, -5597.6493) -> (2325.9761, -5013.0692)
  line L367 (3569.7028, -4993.2508) -> (3130.5816, -5597.6493)
  line L368 (2765.0973, -4408.6707) -> (3569.7028, -4993.2508)
  line L369 (2325.9761, -5013.0692) -> (2765.0973, -4408.6707)
  line L370 (2998.0927, -6517.7647) -> (2690.7607, -5571.8942)
  line L371 (3708.6056, -6286.905) -> (2998.0927, -6517.7647)
  line L372 (3401.2737, -5341.0345) -> (3708.6056, -6286.905)
  line L373 (2690.7607, -5571.8942) -> (3401.2737, -5341.0345)
  line L374 (2350.0766, -7184.2786) -> (2657.4085, -6238.4081)
  line L375 (3060.5896, -7415.1383) -> (2350.0766, -7184.2786)
  line L376 (3367.9215, -6469.2678) -> (3060.5896, -7415.1383)
  line L377 (2657.4085, -6238.4081) -> (3367.9215, -6469.2678)
  line L378 (1434.0535, -7342.6054) -> (2238.659, -6758.0253)
  line L379 (1873.1747, -7947.0039) -> (1434.0535, -7342.6054)
  line L380 (2677.7802, -7362.4238) -> (1873.1747, -7947.0039)
  line L381 (2238.659, -6758.0253) -> (2677.7802, -7362.4238)
  line L382 (12886.9187, -3760.651) -> (12447.7976, -4365.0495)
  line L383 (11613.6572, -4775.3852) -> (12608.2042, -4775.3852)
  line L384 (12608.2042, -4028.3077) -> (11613.6572, -4028.3077)
  line L385 (11613.6572, -4028.3077) -> (11613.6572, -4775.3852)
  line L386 (11545.497, -4408.6707) -> (10740.8915, -4993.2508)
  line L387 (11984.6182, -5013.0692) -> (11545.497, -4408.6707)
  line L388 (11312.5017, -6517.7647) -> (11619.8336, -5571.8942)
  line L389 (12716.1341, -7679.3472) -> (13710.6812, -7679.3472)
  line L390 (13710.6812, -7679.3472) -> (13710.6812, -6932.2697)
  line L391 (14722.3497, -5420.7499) -> (14011.8367, -5189.8903)
  line L392 (14011.8367, -5189.8903) -> (13704.5048, -6135.7607)
  line L393 (14415.0177, -6366.6204) -> (14722.3497, -5420.7499)
  line L394 (13704.5048, -6135.7607) -> (14415.0177, -6366.6204)
  line L395 (13710.6812, -6932.2697) -> (12716.1341, -6932.2697)
  line L396 (14583.4468, -6714.4041) -> (14144.3256, -6110.0056)
  line L397 (13339.7202, -6694.5857) -> (13778.8413, -7298.9842)
  line L398 (13778.8413, -7298.9842) -> (14583.4468, -6714.4041)
  line L399 (14144.3256, -6110.0056) -> (13339.7202, -6694.5857)
  line L400 (11619.8336, -5571.8942) -> (10909.3206, -5341.0345)
  line L401 (11180.0127, -5597.6493) -> (11984.6182, -5013.0692)
  line L402 (10740.8915, -4993.2508) -> (11180.0127, -5597.6493)
  line L403 (10909.3206, -5341.0345) -> (10601.9887, -6286.905)
  line L404 (11653.1858, -6238.4081) -> (10942.6728, -6469.2678)
  line L405 (10601.9887, -6286.905) -> (11312.5017, -6517.7647)
  circle A5 centre (12662.1692, -5853.8275) radius 272.6746
  line L406 (11960.5177, -7184.2786) -> (11653.1858, -6238.4081)
  line L407 (12071.9353, -6758.0253) -> (11632.8141, -7362.4238)
  line L408 (11250.0047, -7415.1383) -> (11960.5177, -7184.2786)
  line L409 (10942.6728, -6469.2678) -> (11250.0047, -7415.1383)
  line L410 (11632.8141, -7362.4238) -> (12437.4196, -7947.0039)
  line L411 (12716.1341, -6932.2697) -> (12716.1341, -7679.3472)
  line L412 (12437.4196, -7947.0039) -> (12876.5408, -7342.6054)
  line L413 (12876.5408, -7342.6054) -> (12071.9353, -6758.0253)
  line L414 (13671.1526, -5469.2468) -> (14381.6656, -5238.3871)
  line L415 (13363.8206, -4523.3763) -> (13671.1526, -5469.2468)
  line L416 (14381.6656, -5238.3871) -> (14074.3336, -4292.5167)
  line L417 (14074.3336, -4292.5167) -> (13363.8206, -4523.3763)
  line L418 (13252.403, -4949.6296) -> (13691.5242, -4345.2311)
  line L419 (12447.7976, -4365.0495) -> (13252.403, -4949.6296)
  line L420 (12608.2042, -4775.3852) -> (12608.2042, -4028.3077)
  line L421 (13691.5242, -4345.2311) -> (12886.9187, -3760.651)
  point P0 (0, 0)
  point P1 (-1000, 2021.4874)
  point P2 (2000, 2021.4874)
  point P3 (500, 521.4874)
  point P4 (500, 521.4874)
  point P5 (500, -978.5126)
  point P6 (500, -978.5126)
  point P7 (500, -2478.5126)
  point P8 (500, -2478.5126)
  point P9 (500, -3978.5126)
  point P10 (500, -3978.5126)
  point P11 (500, -5478.5126)
  point P12 (500, -5478.5126)
  point P13 (500, -6978.5126)
  point P14 (500, -6978.5126)
  point P15 (500, -8478.5126)
  point P16 (500, -8478.5126)
  point P17 (500, -9978.5126)
  point P18 (500, -9978.5126)
  point P19 (500, -11478.5126)
  point P20 (500, -11478.5126)
  point P21 (500, -12978.5126)
  point P22 (500, -12978.5126)
  point P23 (500, -14478.5126)
  point P24 (500, -14478.5126)
  point P25 (500, -15978.5126)
  point P26 (500, -15978.5126)
  point P27 (500, -17478.5126)
  point P28 (500, -17478.5126)
  point P29 (500, -18978.5126)
  point P30 (500, -18978.5126)
  point P31 (500, -20478.5126)
  point P32 (500, -20478.5126)
  point P33 (500, -21978.5126)
  point P34 (500, -21978.5126)
  point P35 (500, -23478.5126)
  point P36 (500, -23478.5126)
  point P37 (500, -24978.5126)
  point P38 (500, -24978.5126)
  point P39 (500, -26478.5126)
  point P40 (500, -26478.5126)
  point P41 (500, -27978.5126)
  point P42 (500, -27978.5126)
  point P43 (500, -29478.5126)
  point P44 (500, -29478.5126)
  point P45 (500, -30978.5126)
  point P46 (500, -30978.5126)
  point P47 (500, -32478.5126)
  point P48 (500, -32478.5126)
  point P49 (500, -33978.5126)
  point P50 (500, -33978.5126)
  point P51 (500, -35478.5126)
  point P52 (500, -35478.5126)
  point P53 (500, -36978.5126)
  point P54 (500, -36978.5126)
  point P55 (500, -38478.5126)
  point P56 (500, -38478.5126)
  point P57 (500, -39978.5126)
  point P58 (500, -39978.5126)
  point P59 (500, -41478.5126)
  point P60 (500, -41478.5126)
  point P61 (7155.2972, -9892.8557)
  point P62 (11899.2478, -6995.7093)
  point P63 (12716.1341, -7226.0632)
  point P64 (13512.4077, -6932.2697)
  point P65 (13983.919, -6226.5479)
  point P66 (13950.5668, -5378.4596)
  point P67 (13425.0905, -4711.9456)
  point P68 (12608.2042, -4481.5917)
  point P69 (11811.9307, -4775.3852)
  point P70 (11340.4194, -5481.107)
  point P71 (11373.7715, -6329.1953)
  dimension "d0" = 200
  dimension "d1" = 90
  dimension "d2" = 300
  dimension "d3" = 300
  dimension "d4" = 1000
  dimension "d5" = 700
  dimension "d8" = 1500
  dimension "d11" = 1500
  dimension "d16" = 1500
  dimension "d23" = 360
revolve "Revolution1" add sketch "Sketch1" angle 360 about axis through (-7155.2972, 0, -58.1035) along (-0.1872099, 0, -0.9823199) contours L419 L418 L415 L414 L392 L394 L399 L397 L395 L411 L413 L407 L406 L404 L388 L400 L401 L387 L383 L420
fillet "Fillet1" radius 200 1 edges at (-3074.0818, 0, -8305.7373)
chamfer "Chamfer1" distance 200 angle 45 1 edges at (-3772.1069, 0, -8788.5696)
properties part number "coba"
